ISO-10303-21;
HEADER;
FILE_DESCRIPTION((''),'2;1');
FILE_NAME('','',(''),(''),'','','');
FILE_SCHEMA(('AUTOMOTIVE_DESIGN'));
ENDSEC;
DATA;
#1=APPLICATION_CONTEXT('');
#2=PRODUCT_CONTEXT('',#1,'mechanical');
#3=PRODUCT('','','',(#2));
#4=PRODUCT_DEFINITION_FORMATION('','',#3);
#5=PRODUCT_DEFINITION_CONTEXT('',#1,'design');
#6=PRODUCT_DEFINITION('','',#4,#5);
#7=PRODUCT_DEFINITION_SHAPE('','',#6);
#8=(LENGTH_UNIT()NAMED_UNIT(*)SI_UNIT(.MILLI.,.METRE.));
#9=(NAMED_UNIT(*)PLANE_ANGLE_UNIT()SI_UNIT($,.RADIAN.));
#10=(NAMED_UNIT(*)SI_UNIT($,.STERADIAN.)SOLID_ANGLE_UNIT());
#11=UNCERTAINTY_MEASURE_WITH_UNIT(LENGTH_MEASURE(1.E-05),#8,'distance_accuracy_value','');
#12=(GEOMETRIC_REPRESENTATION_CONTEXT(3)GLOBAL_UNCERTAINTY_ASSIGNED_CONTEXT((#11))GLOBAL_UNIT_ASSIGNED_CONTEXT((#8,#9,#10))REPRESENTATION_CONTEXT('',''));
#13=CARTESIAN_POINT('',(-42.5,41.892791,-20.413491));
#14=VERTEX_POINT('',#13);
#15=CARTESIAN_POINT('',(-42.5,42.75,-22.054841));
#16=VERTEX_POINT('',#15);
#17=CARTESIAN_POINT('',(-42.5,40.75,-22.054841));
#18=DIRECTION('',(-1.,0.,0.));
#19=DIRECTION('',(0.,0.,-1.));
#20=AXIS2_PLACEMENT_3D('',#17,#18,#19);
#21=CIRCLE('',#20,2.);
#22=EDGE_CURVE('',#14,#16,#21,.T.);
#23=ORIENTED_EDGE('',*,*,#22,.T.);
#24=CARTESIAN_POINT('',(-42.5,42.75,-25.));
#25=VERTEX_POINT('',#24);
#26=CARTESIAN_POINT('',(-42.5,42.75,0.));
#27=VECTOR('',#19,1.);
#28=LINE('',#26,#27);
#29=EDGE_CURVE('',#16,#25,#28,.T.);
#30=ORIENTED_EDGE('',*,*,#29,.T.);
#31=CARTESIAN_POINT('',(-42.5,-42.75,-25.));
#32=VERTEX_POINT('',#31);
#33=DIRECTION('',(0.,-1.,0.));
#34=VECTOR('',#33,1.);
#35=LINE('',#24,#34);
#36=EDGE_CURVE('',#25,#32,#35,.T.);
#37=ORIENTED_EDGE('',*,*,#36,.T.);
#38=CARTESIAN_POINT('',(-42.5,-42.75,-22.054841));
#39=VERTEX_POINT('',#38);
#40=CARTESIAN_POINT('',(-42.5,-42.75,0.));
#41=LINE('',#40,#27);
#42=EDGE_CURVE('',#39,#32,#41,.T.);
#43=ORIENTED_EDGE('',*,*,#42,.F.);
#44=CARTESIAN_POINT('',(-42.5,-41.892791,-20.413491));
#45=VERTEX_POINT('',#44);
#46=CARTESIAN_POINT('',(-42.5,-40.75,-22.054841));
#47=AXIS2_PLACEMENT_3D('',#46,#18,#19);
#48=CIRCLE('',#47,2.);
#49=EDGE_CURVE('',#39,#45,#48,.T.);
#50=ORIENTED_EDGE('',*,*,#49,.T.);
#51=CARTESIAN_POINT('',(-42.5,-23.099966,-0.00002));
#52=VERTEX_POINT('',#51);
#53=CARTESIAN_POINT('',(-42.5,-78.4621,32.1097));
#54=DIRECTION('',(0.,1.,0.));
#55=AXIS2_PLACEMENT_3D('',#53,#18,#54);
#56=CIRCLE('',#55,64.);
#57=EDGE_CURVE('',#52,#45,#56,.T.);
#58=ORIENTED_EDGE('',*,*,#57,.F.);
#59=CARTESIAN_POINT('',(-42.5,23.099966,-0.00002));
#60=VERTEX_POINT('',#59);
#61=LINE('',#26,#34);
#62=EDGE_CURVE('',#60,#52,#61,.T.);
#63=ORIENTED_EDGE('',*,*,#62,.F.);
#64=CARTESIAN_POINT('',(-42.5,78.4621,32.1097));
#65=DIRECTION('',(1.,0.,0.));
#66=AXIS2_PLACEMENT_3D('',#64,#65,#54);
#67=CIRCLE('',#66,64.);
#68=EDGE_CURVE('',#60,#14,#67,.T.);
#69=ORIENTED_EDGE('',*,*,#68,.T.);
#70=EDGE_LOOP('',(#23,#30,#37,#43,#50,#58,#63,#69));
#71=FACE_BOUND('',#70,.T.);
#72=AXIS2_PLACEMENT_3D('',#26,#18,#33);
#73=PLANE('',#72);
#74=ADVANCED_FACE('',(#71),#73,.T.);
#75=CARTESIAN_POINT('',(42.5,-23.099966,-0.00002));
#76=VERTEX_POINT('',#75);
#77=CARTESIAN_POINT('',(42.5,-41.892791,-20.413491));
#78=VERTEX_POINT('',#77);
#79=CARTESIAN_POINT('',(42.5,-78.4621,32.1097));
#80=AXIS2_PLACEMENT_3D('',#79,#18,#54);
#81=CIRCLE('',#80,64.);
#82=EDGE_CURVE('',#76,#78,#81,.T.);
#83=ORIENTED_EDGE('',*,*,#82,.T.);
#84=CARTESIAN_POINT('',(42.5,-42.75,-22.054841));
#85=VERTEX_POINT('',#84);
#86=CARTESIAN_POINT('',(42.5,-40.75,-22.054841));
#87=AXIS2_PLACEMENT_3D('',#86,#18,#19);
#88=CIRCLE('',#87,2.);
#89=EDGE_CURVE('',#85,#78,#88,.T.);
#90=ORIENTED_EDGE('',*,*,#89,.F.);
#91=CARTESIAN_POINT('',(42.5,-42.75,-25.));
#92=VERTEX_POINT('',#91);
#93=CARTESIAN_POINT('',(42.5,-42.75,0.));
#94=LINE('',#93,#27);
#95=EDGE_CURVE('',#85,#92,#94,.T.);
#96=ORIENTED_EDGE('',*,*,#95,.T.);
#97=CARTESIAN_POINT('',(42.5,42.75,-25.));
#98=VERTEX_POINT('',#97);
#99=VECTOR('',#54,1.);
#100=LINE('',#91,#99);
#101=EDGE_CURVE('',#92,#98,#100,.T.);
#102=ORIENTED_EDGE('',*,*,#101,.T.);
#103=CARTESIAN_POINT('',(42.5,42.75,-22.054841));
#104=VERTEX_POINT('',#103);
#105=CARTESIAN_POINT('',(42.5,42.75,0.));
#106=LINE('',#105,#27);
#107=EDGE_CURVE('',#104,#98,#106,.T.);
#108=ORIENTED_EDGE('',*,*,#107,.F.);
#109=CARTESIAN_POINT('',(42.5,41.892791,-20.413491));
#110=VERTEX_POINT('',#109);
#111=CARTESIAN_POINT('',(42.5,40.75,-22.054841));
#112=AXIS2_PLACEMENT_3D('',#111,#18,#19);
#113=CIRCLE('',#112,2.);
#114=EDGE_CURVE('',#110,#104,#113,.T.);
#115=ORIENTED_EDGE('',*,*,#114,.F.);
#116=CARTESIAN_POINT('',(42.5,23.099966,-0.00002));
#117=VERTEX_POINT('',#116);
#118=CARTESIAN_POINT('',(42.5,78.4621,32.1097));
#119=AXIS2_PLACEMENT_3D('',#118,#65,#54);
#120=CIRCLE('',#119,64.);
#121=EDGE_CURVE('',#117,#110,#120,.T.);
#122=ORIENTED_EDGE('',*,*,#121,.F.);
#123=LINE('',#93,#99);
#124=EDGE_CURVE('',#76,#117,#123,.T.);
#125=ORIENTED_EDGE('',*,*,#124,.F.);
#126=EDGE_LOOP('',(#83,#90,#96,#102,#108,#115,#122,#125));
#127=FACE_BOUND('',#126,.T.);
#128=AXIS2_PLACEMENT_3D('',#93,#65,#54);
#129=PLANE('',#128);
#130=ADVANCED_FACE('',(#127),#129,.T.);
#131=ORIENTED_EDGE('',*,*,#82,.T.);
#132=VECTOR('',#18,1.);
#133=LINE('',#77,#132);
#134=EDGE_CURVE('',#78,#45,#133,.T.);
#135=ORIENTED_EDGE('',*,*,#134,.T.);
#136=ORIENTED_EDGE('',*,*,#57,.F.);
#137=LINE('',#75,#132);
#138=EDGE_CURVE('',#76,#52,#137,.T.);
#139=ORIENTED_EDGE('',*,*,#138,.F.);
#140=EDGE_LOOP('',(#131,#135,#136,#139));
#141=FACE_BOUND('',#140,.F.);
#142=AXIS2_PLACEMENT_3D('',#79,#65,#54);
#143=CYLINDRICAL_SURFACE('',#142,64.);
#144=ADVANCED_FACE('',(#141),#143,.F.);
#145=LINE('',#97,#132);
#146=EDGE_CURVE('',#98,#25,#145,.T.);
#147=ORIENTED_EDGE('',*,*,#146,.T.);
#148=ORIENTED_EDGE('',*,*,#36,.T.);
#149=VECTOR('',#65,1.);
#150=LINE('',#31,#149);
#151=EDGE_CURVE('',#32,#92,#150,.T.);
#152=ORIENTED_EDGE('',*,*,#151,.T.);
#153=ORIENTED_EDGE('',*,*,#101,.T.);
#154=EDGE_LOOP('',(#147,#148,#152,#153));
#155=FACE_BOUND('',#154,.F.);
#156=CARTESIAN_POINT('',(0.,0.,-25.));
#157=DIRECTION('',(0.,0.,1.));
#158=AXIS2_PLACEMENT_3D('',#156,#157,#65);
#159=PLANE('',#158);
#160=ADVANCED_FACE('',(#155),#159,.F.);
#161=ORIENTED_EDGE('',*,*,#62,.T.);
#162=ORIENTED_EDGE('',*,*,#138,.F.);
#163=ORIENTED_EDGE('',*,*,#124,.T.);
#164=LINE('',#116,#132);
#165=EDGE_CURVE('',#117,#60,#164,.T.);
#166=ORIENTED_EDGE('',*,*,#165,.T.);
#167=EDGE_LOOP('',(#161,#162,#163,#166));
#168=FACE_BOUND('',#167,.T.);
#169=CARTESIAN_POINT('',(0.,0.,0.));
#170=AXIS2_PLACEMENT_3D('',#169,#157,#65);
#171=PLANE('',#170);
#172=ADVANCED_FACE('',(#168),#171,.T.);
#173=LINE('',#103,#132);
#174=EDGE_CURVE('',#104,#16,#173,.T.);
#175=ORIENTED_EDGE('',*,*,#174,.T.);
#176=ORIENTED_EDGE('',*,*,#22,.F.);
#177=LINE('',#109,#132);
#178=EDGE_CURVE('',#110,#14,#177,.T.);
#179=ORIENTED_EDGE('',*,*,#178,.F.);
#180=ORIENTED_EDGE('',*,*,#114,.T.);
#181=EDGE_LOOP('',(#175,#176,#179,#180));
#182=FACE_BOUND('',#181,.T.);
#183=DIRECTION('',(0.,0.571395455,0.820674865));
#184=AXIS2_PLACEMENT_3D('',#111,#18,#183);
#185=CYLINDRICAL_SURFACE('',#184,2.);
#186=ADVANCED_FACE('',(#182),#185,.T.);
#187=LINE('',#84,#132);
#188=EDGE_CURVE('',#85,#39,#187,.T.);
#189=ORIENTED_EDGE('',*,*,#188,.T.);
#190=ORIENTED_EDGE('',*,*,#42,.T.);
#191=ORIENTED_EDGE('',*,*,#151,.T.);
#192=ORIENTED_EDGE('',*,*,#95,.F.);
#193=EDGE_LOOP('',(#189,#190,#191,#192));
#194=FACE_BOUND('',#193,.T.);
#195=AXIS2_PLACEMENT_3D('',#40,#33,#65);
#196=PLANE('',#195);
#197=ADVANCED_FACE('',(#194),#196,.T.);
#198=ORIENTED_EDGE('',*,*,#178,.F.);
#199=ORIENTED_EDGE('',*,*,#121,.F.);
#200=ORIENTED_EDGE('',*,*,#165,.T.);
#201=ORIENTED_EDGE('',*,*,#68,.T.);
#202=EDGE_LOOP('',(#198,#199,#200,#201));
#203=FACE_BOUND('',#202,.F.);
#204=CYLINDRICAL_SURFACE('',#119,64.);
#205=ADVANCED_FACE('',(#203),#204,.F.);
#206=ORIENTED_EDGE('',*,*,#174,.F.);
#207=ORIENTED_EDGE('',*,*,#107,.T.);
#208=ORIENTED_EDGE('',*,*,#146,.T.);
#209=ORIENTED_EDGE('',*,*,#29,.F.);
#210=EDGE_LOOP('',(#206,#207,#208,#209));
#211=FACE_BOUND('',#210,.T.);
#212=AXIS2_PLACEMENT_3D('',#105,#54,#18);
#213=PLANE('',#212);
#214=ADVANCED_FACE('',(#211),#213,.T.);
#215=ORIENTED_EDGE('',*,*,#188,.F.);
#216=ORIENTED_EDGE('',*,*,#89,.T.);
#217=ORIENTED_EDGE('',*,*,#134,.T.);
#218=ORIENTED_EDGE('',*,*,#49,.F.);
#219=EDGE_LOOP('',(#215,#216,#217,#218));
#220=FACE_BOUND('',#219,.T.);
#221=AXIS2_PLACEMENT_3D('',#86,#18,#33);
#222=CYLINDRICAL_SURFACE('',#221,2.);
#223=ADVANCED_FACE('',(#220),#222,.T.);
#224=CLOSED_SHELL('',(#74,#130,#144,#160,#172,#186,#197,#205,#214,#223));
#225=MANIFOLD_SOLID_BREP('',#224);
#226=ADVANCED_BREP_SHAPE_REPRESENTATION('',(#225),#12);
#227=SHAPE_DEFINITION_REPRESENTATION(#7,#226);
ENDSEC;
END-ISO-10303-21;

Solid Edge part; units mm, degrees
sketch "Sketch1" plane through (0, 0, 0) normal (0, 0, 1) x (1, 0, 0)
  line L0 (-42.5, -42.75) -> (42.5, -42.75)
  line L1 (42.5, -42.75) -> (42.5, 42.75)
  line L2 (42.5, 42.75) -> (-42.5, 42.75)
  line L3 (-42.5, 42.75) -> (-42.5, -42.75)
extrude "Protrusion1" add sketch "Sketch1" against normal blind 25
sketch "Sketch2" plane through (42.5, 0, -12.5) normal (1, 0, 0) x (0, 1, 0)
  line L0 (-42.75, 12.5) -> (-23.1, 12.5)
  arc A0 (-23.1, 12.5) -> (-42.75, -8.5) centre (-78.4621, 44.6097) cw
  line L1 (-42.75, 12.5) -> (-42.75, -8.5)
extrude "ExtrudedCutout_2" cut sketch "Sketch2" against normal blind 85
fillet "Round_1" radius 2 1 edges at (0, -42.75, -21)
sketch "Sketch3" plane through (42.5, 0, -12.5) normal (1, 0, 0) x (0, 1, 0)
  line L0 (42.75, 12.5) -> (23.1, 12.5)
  arc A0 (23.1, 12.5) -> (42.75, -8.5) centre (78.4621, 44.6097) ccw
  line L1 (42.75, 12.5) -> (42.75, -8.5)
extrude "ExtrudedCutout_3" cut sketch "Sketch3" against normal blind 85
fillet "Round_2" radius 2 1 edges at (0, 42.75, -21)
